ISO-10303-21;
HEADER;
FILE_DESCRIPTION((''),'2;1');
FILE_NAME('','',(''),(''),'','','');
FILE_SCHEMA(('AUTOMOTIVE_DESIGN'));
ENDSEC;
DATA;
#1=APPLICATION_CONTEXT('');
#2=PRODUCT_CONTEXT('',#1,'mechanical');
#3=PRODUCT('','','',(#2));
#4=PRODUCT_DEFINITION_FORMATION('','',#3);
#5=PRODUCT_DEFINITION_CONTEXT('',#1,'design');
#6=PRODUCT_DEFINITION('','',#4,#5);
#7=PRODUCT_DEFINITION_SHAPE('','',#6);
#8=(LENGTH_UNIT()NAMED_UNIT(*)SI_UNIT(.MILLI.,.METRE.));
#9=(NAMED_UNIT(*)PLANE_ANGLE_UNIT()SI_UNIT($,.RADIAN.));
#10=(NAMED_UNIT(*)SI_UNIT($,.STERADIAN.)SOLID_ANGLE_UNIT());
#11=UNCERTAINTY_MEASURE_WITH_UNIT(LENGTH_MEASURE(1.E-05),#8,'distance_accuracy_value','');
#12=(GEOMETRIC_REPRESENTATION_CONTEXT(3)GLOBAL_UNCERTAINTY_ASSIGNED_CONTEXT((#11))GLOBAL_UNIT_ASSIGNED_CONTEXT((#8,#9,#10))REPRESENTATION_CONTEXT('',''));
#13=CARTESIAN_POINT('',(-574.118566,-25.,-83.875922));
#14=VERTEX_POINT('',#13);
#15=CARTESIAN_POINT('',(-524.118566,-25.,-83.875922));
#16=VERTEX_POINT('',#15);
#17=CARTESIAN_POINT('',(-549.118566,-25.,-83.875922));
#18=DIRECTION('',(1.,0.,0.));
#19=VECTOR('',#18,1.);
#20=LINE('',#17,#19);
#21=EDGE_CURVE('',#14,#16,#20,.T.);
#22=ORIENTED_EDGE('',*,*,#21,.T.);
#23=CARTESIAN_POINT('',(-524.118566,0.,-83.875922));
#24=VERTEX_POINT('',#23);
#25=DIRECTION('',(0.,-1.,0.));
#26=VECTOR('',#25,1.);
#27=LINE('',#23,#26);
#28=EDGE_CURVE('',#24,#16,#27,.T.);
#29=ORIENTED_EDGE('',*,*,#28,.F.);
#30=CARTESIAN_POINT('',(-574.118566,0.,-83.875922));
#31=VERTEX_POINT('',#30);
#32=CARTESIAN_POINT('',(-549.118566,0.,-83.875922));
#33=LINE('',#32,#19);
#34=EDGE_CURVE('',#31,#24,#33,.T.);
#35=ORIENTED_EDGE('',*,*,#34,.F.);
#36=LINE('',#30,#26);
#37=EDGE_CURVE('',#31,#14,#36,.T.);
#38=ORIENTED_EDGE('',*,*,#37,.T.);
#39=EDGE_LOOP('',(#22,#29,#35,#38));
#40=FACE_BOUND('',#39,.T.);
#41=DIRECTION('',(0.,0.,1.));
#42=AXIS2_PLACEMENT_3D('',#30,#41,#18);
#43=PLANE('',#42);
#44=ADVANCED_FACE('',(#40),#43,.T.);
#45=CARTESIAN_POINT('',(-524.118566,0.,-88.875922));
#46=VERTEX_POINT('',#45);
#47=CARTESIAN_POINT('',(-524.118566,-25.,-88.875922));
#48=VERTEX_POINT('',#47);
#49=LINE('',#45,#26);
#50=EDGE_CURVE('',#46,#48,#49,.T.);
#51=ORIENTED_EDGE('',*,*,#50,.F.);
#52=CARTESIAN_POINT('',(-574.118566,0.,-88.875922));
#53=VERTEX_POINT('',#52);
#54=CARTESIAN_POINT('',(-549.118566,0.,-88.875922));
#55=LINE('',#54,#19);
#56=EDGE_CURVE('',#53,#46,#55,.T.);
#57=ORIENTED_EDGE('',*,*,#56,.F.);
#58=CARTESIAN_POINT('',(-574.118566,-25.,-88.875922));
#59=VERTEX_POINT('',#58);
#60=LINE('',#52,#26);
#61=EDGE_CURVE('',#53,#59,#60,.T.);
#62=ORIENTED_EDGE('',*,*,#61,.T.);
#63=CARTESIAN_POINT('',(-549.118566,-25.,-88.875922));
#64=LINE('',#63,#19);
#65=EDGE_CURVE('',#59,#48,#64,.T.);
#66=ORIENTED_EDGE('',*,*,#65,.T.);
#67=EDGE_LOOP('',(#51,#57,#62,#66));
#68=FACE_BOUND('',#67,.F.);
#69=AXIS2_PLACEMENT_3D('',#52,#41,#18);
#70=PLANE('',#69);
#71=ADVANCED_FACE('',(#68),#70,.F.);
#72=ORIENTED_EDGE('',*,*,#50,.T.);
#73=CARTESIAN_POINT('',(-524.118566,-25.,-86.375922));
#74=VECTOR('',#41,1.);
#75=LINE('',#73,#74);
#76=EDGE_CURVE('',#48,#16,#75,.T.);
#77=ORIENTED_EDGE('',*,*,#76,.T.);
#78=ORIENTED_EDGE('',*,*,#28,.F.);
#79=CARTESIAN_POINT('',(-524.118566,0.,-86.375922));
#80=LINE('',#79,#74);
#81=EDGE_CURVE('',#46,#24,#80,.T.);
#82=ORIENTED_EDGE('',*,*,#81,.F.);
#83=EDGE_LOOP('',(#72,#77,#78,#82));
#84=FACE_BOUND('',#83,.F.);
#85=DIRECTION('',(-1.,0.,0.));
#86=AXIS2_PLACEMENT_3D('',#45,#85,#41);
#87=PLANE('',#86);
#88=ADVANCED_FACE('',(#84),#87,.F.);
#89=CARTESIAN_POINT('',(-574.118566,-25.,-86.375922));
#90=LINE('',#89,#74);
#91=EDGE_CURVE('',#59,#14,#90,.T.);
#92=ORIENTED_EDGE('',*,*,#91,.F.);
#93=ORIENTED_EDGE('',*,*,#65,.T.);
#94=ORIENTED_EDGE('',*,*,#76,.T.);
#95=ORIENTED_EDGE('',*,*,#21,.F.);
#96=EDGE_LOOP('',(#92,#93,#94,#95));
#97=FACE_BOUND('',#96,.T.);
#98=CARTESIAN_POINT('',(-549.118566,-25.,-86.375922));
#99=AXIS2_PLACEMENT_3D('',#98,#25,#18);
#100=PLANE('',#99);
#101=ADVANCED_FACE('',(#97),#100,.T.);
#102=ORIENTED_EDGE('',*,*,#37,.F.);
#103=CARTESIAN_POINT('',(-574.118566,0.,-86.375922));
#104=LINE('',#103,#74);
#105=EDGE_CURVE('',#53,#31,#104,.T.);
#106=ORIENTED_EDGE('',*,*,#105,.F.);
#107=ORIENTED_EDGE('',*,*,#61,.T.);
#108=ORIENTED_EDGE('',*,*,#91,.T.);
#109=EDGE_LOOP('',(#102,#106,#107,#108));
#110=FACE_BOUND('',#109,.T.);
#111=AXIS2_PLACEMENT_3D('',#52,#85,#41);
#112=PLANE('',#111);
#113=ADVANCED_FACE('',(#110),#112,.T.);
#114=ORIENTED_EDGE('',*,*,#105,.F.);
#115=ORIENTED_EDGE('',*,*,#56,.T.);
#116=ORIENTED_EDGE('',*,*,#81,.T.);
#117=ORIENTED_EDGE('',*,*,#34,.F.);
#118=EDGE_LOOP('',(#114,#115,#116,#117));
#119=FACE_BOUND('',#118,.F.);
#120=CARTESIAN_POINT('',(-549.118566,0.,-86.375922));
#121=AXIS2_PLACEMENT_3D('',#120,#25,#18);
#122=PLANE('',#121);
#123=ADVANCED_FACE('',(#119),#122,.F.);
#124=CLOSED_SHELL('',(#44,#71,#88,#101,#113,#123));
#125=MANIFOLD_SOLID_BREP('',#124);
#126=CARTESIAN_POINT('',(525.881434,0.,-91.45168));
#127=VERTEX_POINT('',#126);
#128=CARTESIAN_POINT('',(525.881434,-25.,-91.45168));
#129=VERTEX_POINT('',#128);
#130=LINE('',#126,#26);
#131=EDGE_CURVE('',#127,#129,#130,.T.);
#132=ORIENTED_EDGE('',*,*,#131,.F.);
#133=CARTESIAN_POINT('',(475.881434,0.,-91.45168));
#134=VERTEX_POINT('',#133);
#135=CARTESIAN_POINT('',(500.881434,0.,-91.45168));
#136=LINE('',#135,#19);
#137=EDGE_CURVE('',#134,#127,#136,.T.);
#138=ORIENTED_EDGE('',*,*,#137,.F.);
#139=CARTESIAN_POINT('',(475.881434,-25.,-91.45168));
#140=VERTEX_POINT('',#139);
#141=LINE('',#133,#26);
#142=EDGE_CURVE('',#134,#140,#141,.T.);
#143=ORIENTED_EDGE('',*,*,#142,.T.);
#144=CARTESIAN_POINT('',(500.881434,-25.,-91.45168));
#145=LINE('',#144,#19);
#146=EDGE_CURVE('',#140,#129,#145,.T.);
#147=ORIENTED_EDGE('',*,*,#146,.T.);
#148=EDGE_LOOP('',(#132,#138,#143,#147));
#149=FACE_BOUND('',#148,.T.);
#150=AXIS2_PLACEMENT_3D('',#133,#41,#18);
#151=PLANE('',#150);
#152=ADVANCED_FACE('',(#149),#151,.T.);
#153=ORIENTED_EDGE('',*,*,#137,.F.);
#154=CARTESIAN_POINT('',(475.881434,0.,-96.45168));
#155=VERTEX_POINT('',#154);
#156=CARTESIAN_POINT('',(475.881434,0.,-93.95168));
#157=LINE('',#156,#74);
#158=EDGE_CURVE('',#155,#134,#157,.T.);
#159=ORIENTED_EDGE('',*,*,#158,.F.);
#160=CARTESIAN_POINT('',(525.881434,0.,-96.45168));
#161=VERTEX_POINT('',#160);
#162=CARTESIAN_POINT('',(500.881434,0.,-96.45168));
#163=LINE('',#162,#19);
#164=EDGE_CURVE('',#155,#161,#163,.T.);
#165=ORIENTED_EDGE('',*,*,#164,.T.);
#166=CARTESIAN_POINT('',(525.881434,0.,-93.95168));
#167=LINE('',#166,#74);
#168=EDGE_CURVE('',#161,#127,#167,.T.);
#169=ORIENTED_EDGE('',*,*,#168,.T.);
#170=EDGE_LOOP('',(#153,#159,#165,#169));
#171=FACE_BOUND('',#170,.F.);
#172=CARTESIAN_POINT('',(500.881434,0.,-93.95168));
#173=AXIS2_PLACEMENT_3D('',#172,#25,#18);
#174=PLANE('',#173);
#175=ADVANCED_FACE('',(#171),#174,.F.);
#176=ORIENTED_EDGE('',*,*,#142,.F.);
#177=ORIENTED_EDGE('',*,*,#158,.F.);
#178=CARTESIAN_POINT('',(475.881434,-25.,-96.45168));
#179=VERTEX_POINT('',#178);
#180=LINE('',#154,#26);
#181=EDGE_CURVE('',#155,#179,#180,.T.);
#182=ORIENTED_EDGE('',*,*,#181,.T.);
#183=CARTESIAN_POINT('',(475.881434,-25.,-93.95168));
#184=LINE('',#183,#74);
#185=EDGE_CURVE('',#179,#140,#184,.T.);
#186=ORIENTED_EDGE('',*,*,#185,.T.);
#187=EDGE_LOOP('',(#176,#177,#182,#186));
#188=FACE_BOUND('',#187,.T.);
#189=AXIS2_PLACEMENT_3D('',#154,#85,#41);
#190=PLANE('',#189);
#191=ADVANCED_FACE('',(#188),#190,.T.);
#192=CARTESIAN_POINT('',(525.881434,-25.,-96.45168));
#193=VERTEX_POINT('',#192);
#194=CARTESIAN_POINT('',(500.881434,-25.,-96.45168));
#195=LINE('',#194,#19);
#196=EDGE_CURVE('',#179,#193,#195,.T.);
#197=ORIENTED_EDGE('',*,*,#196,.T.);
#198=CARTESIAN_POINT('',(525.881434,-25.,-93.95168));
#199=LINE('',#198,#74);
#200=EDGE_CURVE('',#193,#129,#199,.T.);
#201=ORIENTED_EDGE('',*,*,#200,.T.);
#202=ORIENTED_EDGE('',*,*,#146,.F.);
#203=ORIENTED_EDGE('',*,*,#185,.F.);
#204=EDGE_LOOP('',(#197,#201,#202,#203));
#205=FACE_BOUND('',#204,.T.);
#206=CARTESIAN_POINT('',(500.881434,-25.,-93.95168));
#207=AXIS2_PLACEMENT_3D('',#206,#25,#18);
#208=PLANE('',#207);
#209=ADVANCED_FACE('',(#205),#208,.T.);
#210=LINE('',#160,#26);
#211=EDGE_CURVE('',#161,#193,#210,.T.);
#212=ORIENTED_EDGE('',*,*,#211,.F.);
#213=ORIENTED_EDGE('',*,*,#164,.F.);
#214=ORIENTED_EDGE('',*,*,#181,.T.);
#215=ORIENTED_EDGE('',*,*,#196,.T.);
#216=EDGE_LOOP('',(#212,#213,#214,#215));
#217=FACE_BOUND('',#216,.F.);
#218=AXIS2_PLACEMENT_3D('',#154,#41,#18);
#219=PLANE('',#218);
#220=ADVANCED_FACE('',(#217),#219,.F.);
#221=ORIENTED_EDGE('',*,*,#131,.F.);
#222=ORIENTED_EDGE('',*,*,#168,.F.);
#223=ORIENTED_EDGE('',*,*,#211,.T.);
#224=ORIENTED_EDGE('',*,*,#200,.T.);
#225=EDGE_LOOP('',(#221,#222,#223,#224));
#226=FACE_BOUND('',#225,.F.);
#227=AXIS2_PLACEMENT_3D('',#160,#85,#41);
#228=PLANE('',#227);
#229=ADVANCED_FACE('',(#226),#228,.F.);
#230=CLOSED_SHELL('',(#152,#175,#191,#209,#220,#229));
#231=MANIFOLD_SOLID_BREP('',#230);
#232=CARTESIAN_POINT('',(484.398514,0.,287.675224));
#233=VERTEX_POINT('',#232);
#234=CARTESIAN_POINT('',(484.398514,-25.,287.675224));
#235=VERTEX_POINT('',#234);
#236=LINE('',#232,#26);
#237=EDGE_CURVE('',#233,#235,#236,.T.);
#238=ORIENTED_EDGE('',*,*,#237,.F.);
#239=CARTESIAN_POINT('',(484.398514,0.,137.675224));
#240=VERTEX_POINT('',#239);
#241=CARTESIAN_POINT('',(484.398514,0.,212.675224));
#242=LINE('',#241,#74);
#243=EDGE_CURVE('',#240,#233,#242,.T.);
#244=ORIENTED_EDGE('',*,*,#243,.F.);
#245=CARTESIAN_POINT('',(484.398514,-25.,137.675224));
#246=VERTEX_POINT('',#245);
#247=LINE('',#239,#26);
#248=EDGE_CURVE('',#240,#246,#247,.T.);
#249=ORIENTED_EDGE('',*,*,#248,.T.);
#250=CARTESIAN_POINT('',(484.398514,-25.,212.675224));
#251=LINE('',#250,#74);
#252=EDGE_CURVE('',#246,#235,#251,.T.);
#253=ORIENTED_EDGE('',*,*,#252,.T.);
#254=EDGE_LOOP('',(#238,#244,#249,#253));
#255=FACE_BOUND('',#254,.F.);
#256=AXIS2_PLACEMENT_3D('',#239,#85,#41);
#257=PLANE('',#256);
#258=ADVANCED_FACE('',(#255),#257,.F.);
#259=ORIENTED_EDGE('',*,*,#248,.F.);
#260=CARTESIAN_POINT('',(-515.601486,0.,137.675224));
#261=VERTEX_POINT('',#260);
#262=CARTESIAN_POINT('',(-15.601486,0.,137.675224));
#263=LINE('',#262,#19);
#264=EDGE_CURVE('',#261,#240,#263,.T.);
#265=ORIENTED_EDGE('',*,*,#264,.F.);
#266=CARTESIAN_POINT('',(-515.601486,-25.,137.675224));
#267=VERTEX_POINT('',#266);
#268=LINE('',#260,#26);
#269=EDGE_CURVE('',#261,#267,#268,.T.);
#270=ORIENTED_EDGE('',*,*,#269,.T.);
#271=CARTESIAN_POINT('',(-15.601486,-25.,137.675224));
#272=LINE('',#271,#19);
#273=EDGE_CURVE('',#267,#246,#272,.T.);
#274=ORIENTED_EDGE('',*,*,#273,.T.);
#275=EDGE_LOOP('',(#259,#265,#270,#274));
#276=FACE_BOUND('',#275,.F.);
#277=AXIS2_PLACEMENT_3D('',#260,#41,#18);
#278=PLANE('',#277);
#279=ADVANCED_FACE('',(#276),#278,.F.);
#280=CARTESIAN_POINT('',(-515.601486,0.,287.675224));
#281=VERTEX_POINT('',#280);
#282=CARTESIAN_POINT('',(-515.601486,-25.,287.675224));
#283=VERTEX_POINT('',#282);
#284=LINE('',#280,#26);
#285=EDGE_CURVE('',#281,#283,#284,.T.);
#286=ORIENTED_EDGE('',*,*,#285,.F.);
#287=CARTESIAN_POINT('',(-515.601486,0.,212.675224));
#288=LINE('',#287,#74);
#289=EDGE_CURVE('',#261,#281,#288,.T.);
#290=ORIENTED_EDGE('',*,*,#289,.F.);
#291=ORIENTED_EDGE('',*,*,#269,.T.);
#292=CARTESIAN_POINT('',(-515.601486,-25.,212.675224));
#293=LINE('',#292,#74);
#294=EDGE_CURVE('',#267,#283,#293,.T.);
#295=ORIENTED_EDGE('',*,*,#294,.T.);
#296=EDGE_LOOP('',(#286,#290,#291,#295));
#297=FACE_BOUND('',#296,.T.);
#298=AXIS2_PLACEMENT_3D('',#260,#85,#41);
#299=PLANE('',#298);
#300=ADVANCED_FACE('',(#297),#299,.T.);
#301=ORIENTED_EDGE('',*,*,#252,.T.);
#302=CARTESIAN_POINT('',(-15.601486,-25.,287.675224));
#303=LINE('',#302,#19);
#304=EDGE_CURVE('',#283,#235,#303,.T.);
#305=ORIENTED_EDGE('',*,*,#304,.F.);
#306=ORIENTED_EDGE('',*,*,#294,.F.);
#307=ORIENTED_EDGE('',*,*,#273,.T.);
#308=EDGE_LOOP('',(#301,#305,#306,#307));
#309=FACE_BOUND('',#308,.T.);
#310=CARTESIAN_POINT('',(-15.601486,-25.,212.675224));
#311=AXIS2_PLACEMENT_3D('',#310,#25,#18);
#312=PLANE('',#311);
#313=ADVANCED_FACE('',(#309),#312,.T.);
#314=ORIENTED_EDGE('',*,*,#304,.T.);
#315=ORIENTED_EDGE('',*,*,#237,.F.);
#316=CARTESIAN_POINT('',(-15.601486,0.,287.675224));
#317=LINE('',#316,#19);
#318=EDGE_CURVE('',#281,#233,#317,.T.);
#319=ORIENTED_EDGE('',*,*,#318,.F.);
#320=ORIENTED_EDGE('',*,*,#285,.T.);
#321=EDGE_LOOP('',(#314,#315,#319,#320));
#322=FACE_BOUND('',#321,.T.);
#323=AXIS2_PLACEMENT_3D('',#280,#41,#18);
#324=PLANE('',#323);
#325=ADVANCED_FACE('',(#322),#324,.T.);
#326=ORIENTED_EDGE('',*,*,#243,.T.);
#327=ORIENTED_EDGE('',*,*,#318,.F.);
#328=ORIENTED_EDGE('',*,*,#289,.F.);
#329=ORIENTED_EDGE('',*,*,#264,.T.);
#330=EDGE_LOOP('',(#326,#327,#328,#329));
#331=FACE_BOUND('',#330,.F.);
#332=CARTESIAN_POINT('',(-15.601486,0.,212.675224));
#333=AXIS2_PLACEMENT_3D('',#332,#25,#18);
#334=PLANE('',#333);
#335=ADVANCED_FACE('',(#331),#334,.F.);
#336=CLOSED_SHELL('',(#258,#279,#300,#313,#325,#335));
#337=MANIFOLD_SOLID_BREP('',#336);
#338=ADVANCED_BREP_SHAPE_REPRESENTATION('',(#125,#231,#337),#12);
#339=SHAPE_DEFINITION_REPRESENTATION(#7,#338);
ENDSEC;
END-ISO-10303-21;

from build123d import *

# Parameters (mm, degrees)
F0_W     = 50
F0_H     = 5
F1_DEPTH = 25
F2_W     = 1000
F2_H     = 150
F3_DEPTH = 25


with BuildPart() as f1:
    # F0 (on Front) → F1 (new body)
    with BuildSketch(Plane.XZ):
        with Locations((-549.1185657559, -86.3759217312)):
            Rectangle(F0_W, F0_H)
    extrude(amount=F1_DEPTH)


with BuildPart() as f1b:
    # F0 (on Front) → F1, piece 2 (new body)
    with BuildSketch(Plane.XZ):
        with Locations((500.8814342441, -93.9516803368)):
            Rectangle(F0_W, F0_H)
    extrude(amount=F1_DEPTH)


with BuildPart() as f3:
    # F2 (on Front) → F3 (new body)
    with BuildSketch(Plane.XZ):
        with Locations((-15.6014859676, 212.6752244859)):
            Rectangle(F2_W, F2_H)
    extrude(amount=F3_DEPTH)


solid = Compound([f1.part, f1b.part, f3.part])
